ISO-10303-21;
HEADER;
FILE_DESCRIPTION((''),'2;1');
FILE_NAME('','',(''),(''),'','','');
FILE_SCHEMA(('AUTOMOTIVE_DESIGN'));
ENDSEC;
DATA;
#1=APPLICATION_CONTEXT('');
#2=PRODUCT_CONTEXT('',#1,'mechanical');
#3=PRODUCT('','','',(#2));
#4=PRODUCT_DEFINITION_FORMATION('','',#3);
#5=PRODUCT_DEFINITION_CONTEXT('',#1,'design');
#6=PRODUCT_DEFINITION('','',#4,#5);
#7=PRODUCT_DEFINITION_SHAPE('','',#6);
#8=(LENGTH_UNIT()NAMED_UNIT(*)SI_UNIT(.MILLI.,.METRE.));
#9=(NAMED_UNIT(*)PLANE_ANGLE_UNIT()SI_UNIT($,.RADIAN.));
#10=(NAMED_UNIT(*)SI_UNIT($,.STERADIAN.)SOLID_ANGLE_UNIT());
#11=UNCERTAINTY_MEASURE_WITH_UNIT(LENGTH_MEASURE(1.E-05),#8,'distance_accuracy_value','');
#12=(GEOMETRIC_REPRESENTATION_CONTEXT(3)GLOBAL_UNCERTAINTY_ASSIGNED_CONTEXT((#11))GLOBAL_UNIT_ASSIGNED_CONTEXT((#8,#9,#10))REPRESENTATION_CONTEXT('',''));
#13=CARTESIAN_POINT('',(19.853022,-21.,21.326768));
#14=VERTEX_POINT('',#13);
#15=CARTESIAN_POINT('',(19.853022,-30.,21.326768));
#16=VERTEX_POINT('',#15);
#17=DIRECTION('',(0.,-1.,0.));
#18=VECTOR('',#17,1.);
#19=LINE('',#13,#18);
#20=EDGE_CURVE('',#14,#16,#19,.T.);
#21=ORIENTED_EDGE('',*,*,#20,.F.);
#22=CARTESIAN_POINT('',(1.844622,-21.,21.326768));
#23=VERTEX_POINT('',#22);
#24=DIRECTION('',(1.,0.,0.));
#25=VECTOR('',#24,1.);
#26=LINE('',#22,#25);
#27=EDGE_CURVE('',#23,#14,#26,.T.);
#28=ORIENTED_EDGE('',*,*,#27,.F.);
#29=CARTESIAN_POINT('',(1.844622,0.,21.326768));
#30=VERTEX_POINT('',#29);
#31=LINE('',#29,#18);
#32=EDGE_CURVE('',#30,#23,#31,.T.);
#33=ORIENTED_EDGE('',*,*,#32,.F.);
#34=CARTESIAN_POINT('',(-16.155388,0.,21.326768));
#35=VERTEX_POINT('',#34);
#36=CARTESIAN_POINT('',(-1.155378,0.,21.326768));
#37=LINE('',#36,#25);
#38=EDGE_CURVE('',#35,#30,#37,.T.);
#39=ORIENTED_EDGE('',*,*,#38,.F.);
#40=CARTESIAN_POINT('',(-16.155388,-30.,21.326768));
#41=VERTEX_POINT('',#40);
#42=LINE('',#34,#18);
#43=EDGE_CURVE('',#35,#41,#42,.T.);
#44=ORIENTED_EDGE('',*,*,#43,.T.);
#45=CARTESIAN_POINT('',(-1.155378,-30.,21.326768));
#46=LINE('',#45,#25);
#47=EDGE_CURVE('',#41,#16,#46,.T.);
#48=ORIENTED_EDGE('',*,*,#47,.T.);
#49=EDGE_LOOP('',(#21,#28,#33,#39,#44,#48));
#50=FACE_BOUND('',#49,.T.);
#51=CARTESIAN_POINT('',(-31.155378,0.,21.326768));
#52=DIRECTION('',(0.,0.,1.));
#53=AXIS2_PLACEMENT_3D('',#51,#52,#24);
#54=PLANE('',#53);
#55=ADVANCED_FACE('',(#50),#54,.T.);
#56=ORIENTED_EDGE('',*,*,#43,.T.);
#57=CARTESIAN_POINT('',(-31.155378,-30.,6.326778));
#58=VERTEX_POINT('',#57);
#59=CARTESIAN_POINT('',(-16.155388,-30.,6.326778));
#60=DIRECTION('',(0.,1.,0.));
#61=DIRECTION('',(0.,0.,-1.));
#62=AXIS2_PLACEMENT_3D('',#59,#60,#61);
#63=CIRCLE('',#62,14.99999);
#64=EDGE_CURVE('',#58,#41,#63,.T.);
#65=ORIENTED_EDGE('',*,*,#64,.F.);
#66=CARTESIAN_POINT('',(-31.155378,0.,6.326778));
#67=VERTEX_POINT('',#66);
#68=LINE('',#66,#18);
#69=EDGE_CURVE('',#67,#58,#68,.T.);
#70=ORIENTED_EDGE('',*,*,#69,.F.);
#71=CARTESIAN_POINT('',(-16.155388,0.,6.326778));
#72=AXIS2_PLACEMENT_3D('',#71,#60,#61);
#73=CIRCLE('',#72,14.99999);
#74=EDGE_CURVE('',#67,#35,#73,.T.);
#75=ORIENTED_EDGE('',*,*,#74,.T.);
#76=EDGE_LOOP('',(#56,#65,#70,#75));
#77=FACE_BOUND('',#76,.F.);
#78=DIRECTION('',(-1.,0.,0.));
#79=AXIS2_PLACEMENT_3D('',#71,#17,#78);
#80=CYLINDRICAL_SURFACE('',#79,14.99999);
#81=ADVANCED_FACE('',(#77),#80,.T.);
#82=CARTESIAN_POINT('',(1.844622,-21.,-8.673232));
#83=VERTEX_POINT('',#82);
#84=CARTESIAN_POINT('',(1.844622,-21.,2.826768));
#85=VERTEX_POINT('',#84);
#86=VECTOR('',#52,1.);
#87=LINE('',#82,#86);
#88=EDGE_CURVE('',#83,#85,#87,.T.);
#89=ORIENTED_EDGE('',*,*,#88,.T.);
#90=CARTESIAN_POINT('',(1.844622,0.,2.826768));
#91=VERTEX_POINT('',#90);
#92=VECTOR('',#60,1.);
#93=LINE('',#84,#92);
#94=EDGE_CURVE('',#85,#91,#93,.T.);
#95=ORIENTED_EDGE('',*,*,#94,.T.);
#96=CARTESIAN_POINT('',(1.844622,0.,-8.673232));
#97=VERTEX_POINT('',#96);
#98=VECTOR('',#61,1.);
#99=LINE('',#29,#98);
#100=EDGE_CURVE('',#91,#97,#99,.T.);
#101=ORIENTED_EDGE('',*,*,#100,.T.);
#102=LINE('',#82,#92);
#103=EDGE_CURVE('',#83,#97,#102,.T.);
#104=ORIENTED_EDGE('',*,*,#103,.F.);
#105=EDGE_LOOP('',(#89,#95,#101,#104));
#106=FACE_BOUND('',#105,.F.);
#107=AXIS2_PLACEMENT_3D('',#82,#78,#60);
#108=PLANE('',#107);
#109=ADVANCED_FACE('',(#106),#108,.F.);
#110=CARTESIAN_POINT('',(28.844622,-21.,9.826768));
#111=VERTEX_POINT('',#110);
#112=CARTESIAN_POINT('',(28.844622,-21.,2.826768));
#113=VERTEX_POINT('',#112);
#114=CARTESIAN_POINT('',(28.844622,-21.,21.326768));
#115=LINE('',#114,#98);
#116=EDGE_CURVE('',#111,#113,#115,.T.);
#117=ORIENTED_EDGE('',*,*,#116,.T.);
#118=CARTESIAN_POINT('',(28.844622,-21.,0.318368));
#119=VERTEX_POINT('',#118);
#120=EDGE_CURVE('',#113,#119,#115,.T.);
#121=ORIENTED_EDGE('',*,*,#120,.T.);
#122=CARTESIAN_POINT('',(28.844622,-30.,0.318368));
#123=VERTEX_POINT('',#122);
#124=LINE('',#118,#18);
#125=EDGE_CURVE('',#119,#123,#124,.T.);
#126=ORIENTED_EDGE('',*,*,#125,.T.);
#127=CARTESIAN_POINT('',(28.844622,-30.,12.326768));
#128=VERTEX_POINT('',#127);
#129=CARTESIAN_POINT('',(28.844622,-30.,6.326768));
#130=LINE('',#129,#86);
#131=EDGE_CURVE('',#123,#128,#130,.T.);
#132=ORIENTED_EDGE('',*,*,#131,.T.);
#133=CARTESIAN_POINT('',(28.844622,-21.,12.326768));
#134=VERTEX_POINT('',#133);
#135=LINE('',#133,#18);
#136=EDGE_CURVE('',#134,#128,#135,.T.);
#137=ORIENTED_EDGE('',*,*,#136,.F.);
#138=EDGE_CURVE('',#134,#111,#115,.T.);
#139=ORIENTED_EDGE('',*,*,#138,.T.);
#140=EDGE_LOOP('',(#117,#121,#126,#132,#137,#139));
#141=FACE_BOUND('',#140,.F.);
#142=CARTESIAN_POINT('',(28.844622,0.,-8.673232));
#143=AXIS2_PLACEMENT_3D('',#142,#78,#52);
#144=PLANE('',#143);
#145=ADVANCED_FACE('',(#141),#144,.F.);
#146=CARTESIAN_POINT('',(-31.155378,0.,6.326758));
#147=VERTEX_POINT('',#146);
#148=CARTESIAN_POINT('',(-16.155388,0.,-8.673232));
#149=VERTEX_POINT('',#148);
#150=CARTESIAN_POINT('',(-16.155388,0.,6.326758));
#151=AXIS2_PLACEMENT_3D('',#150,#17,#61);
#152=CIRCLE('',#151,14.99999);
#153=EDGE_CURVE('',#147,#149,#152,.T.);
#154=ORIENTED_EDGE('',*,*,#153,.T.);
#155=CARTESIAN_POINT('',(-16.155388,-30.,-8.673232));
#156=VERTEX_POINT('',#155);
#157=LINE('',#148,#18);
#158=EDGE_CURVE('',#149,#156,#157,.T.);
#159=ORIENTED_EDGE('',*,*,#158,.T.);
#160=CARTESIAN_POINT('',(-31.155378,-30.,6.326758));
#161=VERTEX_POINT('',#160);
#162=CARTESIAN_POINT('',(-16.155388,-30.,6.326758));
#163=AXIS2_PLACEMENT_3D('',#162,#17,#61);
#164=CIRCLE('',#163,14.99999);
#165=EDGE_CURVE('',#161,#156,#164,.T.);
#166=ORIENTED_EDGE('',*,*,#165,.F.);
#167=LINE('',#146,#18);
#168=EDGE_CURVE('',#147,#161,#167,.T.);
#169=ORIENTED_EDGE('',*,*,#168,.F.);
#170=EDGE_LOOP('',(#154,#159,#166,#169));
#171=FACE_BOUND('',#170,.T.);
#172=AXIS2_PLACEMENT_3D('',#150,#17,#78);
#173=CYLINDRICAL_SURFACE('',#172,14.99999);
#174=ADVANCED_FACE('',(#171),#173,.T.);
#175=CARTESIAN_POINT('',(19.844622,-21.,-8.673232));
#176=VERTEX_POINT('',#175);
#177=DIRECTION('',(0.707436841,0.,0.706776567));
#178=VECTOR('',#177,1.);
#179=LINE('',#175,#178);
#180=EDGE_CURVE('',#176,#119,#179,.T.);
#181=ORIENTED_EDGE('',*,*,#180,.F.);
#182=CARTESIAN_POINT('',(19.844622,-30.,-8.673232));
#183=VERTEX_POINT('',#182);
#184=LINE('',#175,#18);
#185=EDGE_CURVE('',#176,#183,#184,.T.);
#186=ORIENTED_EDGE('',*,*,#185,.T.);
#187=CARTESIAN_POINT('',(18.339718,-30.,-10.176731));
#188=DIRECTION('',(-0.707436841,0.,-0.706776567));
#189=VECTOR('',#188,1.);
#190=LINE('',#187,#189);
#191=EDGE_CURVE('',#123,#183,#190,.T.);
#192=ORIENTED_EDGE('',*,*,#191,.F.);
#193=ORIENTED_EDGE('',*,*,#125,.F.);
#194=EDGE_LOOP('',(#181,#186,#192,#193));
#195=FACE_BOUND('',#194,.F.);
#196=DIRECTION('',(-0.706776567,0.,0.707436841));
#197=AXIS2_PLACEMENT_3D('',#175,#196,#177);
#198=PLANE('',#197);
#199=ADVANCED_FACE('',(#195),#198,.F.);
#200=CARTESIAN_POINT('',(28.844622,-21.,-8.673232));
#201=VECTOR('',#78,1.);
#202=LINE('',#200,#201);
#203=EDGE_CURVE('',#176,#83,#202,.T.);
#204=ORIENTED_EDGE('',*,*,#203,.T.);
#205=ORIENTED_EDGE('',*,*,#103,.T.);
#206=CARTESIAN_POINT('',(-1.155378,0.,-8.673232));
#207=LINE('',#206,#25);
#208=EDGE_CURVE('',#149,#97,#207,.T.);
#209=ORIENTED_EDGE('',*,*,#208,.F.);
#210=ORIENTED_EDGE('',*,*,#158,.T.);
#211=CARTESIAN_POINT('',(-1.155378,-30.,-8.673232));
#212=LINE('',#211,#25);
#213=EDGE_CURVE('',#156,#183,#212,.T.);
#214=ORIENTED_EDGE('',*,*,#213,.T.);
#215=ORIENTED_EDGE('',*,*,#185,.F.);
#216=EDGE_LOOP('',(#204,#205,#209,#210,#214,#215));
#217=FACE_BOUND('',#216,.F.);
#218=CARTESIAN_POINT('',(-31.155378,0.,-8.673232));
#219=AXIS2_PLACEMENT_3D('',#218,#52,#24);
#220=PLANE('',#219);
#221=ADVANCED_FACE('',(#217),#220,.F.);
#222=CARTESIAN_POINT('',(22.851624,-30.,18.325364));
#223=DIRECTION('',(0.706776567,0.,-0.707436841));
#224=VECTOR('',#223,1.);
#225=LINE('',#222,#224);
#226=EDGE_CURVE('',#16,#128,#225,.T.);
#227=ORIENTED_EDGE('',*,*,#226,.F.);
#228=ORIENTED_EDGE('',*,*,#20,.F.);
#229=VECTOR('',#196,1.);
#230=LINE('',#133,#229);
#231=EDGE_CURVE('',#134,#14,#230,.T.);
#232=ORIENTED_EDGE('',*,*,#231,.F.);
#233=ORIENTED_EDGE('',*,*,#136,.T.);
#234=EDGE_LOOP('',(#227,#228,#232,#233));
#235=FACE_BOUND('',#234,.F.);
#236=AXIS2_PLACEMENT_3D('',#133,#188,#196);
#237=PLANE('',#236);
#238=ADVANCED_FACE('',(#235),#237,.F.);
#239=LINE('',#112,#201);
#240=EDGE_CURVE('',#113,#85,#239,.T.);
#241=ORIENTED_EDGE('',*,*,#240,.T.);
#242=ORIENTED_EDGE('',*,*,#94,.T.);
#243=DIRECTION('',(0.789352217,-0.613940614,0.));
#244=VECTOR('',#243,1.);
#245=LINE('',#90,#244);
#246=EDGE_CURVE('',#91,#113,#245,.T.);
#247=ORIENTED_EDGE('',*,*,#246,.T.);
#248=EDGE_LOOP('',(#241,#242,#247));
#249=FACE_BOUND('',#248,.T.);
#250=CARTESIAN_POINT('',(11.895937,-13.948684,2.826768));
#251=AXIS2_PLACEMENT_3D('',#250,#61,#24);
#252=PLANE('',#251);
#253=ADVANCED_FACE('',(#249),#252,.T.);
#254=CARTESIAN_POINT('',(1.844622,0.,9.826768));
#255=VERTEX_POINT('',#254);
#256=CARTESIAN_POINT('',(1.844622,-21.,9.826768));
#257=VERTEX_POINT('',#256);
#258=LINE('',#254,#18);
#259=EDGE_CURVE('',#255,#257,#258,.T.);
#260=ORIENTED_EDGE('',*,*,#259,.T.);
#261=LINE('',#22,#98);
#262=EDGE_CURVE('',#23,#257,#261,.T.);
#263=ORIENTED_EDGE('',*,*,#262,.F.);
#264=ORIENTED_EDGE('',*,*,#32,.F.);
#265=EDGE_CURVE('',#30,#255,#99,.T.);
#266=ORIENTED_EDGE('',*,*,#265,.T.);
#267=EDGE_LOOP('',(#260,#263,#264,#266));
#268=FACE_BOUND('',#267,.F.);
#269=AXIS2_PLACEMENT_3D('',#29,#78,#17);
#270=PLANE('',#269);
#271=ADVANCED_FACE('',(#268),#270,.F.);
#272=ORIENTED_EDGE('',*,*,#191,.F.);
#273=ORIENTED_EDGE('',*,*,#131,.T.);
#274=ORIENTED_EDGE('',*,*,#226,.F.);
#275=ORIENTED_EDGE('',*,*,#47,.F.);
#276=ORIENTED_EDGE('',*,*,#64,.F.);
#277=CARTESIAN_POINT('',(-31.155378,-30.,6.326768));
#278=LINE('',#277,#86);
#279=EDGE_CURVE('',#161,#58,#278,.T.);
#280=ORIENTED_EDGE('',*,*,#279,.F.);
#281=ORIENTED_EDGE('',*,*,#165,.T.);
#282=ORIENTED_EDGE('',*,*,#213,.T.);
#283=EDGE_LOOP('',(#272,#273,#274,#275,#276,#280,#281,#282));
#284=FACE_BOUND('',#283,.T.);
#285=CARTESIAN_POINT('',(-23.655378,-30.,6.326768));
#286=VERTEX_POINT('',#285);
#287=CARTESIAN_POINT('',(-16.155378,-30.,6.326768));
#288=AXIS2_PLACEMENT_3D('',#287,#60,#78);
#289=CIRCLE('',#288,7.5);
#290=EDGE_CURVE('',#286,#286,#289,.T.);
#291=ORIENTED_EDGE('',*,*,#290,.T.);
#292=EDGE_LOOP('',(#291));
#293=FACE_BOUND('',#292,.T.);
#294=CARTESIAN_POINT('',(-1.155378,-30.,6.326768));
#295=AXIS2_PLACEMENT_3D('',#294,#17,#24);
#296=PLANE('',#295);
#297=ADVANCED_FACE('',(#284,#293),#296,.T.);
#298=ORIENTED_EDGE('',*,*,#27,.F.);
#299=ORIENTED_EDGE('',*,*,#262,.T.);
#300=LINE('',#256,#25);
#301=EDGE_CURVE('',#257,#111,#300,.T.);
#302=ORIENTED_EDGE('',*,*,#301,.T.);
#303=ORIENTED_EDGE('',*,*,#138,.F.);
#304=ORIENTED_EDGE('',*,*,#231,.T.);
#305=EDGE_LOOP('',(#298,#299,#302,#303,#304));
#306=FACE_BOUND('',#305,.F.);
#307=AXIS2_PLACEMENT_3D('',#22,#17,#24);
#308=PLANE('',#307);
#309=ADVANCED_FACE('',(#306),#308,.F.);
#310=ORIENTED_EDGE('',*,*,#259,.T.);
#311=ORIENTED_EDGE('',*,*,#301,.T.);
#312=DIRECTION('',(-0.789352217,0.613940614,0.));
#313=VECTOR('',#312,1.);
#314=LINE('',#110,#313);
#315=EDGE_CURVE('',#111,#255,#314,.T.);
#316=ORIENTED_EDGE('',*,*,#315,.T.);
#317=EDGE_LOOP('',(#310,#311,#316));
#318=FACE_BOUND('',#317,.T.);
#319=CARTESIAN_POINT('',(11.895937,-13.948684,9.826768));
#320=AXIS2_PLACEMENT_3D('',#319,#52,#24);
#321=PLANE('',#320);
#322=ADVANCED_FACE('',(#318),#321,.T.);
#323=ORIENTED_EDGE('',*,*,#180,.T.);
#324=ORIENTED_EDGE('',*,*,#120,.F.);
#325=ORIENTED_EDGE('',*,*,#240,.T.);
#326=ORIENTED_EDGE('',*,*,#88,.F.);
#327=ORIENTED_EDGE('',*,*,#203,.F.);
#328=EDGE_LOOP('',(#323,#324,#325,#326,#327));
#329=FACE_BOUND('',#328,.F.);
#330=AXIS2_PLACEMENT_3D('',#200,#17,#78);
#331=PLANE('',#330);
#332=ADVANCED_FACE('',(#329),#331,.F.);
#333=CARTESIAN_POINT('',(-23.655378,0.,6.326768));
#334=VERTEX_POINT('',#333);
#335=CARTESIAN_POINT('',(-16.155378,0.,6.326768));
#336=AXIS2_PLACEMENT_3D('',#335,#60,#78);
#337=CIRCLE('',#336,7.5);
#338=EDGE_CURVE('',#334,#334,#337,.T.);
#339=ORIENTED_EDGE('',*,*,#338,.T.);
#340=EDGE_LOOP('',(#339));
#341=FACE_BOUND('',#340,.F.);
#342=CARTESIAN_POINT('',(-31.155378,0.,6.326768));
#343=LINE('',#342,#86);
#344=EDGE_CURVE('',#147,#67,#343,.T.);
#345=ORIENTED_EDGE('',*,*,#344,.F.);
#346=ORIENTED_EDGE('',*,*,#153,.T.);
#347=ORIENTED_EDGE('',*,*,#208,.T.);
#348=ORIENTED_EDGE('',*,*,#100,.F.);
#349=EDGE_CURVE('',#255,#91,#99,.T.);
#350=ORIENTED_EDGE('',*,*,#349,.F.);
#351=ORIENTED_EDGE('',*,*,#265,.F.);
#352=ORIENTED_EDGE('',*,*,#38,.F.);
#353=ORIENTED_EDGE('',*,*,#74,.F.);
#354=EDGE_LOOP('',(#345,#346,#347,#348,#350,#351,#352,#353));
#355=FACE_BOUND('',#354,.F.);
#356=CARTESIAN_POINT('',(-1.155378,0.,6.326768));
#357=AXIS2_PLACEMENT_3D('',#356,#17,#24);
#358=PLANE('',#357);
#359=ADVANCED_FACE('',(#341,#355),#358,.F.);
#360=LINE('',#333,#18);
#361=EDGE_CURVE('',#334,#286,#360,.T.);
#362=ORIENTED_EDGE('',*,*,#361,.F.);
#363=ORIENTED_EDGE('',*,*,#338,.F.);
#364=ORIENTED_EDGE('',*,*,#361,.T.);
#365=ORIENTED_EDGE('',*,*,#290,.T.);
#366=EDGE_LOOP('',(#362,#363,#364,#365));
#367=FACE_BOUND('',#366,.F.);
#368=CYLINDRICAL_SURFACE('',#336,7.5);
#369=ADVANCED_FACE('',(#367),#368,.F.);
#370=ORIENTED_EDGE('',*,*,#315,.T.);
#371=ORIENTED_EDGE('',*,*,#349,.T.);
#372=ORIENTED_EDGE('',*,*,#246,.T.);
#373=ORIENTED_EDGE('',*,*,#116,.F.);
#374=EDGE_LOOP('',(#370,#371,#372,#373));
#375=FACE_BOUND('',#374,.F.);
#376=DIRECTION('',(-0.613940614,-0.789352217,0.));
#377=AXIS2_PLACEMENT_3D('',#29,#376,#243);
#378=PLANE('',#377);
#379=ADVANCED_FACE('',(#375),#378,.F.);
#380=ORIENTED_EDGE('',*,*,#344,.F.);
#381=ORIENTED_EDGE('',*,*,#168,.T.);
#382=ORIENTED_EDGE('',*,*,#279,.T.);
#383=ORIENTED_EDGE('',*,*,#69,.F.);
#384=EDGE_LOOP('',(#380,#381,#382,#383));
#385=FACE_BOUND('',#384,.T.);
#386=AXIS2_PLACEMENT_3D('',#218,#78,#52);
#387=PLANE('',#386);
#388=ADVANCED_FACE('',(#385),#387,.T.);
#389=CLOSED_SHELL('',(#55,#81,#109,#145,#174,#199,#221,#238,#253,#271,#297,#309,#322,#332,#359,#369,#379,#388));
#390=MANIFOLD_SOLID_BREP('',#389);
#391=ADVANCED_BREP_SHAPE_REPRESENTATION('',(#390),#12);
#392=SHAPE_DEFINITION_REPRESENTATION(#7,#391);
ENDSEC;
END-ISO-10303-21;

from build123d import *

# Parameters (mm, degrees)
F0_W      = 60
F0_H      = 30
F1_DEPTH  = 30
F2_R      = 14.99999
F4_DEPTH  = 45.974
F5_DEPTH  = 11.5
F7_DEPTH  = 11.5
F8_R      = 7.5
F9_DEPTH  = 31
F11_DEPTH = 25.4
F13_DEPTH = 25.4


# Not quite as in the source:
# - a fillet or chamfer is up to 0.001 mm smaller than in the source, because OpenCascade refuses the exact size


with BuildPart() as f1:
    # F0 (on Front) → F1 (new body)
    with BuildSketch(Plane.XZ):
        with Locations((-1.155378297, 6.3267682405)):
            Rectangle(F0_W, F0_H)
    extrude(amount=F1_DEPTH)

    # F2 (radius 15 in the source; OpenCascade refuses exactly that, so slightly less here)
    f2_edges = [f1.edges().sort_by_distance(p)[0] for p in [
        (-31.155378, -15, 21.326768),
        (-31.155378, -15, -8.673232),
    ]]
    fillet(f2_edges, radius=F2_R)

    # F3 (on face) → F4 (cut)
    with BuildSketch(Plane.XY.offset(21.3267682405)):
        Polygon((28.844621703, 0), (1.844621703, 0), (28.844621703, -21), align=None)
    extrude(amount=-F4_DEPTH, mode=Mode.SUBTRACT)

    # F3 (on face) → F5 (cut)
    with BuildSketch(Plane.XY.offset(21.3267682405)):
        Polygon((28.844621703, -21), (1.844621703, 0), (1.844621703, -21), align=None)
    extrude(amount=-F5_DEPTH, mode=Mode.SUBTRACT)

    # F6 (on face) → F7 (cut)
    with BuildSketch(Plane(origin=(0, 0, -8.6732317595), x_dir=(1, 0, 0), z_dir=(0, 0, -1))):
        Polygon((1.844621703, 21), (1.844621703, 0), (28.844621703, 21), align=None)
    extrude(amount=-F7_DEPTH, mode=Mode.SUBTRACT)

    # F8 (on face) → F9 (cut)
    with BuildSketch(Plane(origin=(0, 0, 0), x_dir=(-1, 0, 0), z_dir=(0, 1, 0))):
        with Locations((16.155378297, 6.3267682405)):
            Circle(F8_R)
    extrude(amount=-F9_DEPTH, mode=Mode.SUBTRACT)

    # F10 (on face) → F11 (cut)
    with BuildSketch(Plane(origin=(0, -21, 0), x_dir=(-1, 0, 0), z_dir=(0, 1, 0))):
        Polygon((-28.844621703, 0.3183682405), (-28.844621703, -8.6732317595), (-19.844621703, -8.6732317595), align=None)
    extrude(amount=-F11_DEPTH, mode=Mode.SUBTRACT)

    # F12 (on face) → F13 (cut)
    with BuildSketch(Plane(origin=(0, -21, 0), x_dir=(-1, 0, 0), z_dir=(0, 1, 0))):
        Polygon((-19.853021703, 21.3267682405), (-28.844621703, 21.3267682405), (-28.844621703, 12.3267682405), align=None)
    extrude(amount=-F13_DEPTH, mode=Mode.SUBTRACT)


solid = f1.part
